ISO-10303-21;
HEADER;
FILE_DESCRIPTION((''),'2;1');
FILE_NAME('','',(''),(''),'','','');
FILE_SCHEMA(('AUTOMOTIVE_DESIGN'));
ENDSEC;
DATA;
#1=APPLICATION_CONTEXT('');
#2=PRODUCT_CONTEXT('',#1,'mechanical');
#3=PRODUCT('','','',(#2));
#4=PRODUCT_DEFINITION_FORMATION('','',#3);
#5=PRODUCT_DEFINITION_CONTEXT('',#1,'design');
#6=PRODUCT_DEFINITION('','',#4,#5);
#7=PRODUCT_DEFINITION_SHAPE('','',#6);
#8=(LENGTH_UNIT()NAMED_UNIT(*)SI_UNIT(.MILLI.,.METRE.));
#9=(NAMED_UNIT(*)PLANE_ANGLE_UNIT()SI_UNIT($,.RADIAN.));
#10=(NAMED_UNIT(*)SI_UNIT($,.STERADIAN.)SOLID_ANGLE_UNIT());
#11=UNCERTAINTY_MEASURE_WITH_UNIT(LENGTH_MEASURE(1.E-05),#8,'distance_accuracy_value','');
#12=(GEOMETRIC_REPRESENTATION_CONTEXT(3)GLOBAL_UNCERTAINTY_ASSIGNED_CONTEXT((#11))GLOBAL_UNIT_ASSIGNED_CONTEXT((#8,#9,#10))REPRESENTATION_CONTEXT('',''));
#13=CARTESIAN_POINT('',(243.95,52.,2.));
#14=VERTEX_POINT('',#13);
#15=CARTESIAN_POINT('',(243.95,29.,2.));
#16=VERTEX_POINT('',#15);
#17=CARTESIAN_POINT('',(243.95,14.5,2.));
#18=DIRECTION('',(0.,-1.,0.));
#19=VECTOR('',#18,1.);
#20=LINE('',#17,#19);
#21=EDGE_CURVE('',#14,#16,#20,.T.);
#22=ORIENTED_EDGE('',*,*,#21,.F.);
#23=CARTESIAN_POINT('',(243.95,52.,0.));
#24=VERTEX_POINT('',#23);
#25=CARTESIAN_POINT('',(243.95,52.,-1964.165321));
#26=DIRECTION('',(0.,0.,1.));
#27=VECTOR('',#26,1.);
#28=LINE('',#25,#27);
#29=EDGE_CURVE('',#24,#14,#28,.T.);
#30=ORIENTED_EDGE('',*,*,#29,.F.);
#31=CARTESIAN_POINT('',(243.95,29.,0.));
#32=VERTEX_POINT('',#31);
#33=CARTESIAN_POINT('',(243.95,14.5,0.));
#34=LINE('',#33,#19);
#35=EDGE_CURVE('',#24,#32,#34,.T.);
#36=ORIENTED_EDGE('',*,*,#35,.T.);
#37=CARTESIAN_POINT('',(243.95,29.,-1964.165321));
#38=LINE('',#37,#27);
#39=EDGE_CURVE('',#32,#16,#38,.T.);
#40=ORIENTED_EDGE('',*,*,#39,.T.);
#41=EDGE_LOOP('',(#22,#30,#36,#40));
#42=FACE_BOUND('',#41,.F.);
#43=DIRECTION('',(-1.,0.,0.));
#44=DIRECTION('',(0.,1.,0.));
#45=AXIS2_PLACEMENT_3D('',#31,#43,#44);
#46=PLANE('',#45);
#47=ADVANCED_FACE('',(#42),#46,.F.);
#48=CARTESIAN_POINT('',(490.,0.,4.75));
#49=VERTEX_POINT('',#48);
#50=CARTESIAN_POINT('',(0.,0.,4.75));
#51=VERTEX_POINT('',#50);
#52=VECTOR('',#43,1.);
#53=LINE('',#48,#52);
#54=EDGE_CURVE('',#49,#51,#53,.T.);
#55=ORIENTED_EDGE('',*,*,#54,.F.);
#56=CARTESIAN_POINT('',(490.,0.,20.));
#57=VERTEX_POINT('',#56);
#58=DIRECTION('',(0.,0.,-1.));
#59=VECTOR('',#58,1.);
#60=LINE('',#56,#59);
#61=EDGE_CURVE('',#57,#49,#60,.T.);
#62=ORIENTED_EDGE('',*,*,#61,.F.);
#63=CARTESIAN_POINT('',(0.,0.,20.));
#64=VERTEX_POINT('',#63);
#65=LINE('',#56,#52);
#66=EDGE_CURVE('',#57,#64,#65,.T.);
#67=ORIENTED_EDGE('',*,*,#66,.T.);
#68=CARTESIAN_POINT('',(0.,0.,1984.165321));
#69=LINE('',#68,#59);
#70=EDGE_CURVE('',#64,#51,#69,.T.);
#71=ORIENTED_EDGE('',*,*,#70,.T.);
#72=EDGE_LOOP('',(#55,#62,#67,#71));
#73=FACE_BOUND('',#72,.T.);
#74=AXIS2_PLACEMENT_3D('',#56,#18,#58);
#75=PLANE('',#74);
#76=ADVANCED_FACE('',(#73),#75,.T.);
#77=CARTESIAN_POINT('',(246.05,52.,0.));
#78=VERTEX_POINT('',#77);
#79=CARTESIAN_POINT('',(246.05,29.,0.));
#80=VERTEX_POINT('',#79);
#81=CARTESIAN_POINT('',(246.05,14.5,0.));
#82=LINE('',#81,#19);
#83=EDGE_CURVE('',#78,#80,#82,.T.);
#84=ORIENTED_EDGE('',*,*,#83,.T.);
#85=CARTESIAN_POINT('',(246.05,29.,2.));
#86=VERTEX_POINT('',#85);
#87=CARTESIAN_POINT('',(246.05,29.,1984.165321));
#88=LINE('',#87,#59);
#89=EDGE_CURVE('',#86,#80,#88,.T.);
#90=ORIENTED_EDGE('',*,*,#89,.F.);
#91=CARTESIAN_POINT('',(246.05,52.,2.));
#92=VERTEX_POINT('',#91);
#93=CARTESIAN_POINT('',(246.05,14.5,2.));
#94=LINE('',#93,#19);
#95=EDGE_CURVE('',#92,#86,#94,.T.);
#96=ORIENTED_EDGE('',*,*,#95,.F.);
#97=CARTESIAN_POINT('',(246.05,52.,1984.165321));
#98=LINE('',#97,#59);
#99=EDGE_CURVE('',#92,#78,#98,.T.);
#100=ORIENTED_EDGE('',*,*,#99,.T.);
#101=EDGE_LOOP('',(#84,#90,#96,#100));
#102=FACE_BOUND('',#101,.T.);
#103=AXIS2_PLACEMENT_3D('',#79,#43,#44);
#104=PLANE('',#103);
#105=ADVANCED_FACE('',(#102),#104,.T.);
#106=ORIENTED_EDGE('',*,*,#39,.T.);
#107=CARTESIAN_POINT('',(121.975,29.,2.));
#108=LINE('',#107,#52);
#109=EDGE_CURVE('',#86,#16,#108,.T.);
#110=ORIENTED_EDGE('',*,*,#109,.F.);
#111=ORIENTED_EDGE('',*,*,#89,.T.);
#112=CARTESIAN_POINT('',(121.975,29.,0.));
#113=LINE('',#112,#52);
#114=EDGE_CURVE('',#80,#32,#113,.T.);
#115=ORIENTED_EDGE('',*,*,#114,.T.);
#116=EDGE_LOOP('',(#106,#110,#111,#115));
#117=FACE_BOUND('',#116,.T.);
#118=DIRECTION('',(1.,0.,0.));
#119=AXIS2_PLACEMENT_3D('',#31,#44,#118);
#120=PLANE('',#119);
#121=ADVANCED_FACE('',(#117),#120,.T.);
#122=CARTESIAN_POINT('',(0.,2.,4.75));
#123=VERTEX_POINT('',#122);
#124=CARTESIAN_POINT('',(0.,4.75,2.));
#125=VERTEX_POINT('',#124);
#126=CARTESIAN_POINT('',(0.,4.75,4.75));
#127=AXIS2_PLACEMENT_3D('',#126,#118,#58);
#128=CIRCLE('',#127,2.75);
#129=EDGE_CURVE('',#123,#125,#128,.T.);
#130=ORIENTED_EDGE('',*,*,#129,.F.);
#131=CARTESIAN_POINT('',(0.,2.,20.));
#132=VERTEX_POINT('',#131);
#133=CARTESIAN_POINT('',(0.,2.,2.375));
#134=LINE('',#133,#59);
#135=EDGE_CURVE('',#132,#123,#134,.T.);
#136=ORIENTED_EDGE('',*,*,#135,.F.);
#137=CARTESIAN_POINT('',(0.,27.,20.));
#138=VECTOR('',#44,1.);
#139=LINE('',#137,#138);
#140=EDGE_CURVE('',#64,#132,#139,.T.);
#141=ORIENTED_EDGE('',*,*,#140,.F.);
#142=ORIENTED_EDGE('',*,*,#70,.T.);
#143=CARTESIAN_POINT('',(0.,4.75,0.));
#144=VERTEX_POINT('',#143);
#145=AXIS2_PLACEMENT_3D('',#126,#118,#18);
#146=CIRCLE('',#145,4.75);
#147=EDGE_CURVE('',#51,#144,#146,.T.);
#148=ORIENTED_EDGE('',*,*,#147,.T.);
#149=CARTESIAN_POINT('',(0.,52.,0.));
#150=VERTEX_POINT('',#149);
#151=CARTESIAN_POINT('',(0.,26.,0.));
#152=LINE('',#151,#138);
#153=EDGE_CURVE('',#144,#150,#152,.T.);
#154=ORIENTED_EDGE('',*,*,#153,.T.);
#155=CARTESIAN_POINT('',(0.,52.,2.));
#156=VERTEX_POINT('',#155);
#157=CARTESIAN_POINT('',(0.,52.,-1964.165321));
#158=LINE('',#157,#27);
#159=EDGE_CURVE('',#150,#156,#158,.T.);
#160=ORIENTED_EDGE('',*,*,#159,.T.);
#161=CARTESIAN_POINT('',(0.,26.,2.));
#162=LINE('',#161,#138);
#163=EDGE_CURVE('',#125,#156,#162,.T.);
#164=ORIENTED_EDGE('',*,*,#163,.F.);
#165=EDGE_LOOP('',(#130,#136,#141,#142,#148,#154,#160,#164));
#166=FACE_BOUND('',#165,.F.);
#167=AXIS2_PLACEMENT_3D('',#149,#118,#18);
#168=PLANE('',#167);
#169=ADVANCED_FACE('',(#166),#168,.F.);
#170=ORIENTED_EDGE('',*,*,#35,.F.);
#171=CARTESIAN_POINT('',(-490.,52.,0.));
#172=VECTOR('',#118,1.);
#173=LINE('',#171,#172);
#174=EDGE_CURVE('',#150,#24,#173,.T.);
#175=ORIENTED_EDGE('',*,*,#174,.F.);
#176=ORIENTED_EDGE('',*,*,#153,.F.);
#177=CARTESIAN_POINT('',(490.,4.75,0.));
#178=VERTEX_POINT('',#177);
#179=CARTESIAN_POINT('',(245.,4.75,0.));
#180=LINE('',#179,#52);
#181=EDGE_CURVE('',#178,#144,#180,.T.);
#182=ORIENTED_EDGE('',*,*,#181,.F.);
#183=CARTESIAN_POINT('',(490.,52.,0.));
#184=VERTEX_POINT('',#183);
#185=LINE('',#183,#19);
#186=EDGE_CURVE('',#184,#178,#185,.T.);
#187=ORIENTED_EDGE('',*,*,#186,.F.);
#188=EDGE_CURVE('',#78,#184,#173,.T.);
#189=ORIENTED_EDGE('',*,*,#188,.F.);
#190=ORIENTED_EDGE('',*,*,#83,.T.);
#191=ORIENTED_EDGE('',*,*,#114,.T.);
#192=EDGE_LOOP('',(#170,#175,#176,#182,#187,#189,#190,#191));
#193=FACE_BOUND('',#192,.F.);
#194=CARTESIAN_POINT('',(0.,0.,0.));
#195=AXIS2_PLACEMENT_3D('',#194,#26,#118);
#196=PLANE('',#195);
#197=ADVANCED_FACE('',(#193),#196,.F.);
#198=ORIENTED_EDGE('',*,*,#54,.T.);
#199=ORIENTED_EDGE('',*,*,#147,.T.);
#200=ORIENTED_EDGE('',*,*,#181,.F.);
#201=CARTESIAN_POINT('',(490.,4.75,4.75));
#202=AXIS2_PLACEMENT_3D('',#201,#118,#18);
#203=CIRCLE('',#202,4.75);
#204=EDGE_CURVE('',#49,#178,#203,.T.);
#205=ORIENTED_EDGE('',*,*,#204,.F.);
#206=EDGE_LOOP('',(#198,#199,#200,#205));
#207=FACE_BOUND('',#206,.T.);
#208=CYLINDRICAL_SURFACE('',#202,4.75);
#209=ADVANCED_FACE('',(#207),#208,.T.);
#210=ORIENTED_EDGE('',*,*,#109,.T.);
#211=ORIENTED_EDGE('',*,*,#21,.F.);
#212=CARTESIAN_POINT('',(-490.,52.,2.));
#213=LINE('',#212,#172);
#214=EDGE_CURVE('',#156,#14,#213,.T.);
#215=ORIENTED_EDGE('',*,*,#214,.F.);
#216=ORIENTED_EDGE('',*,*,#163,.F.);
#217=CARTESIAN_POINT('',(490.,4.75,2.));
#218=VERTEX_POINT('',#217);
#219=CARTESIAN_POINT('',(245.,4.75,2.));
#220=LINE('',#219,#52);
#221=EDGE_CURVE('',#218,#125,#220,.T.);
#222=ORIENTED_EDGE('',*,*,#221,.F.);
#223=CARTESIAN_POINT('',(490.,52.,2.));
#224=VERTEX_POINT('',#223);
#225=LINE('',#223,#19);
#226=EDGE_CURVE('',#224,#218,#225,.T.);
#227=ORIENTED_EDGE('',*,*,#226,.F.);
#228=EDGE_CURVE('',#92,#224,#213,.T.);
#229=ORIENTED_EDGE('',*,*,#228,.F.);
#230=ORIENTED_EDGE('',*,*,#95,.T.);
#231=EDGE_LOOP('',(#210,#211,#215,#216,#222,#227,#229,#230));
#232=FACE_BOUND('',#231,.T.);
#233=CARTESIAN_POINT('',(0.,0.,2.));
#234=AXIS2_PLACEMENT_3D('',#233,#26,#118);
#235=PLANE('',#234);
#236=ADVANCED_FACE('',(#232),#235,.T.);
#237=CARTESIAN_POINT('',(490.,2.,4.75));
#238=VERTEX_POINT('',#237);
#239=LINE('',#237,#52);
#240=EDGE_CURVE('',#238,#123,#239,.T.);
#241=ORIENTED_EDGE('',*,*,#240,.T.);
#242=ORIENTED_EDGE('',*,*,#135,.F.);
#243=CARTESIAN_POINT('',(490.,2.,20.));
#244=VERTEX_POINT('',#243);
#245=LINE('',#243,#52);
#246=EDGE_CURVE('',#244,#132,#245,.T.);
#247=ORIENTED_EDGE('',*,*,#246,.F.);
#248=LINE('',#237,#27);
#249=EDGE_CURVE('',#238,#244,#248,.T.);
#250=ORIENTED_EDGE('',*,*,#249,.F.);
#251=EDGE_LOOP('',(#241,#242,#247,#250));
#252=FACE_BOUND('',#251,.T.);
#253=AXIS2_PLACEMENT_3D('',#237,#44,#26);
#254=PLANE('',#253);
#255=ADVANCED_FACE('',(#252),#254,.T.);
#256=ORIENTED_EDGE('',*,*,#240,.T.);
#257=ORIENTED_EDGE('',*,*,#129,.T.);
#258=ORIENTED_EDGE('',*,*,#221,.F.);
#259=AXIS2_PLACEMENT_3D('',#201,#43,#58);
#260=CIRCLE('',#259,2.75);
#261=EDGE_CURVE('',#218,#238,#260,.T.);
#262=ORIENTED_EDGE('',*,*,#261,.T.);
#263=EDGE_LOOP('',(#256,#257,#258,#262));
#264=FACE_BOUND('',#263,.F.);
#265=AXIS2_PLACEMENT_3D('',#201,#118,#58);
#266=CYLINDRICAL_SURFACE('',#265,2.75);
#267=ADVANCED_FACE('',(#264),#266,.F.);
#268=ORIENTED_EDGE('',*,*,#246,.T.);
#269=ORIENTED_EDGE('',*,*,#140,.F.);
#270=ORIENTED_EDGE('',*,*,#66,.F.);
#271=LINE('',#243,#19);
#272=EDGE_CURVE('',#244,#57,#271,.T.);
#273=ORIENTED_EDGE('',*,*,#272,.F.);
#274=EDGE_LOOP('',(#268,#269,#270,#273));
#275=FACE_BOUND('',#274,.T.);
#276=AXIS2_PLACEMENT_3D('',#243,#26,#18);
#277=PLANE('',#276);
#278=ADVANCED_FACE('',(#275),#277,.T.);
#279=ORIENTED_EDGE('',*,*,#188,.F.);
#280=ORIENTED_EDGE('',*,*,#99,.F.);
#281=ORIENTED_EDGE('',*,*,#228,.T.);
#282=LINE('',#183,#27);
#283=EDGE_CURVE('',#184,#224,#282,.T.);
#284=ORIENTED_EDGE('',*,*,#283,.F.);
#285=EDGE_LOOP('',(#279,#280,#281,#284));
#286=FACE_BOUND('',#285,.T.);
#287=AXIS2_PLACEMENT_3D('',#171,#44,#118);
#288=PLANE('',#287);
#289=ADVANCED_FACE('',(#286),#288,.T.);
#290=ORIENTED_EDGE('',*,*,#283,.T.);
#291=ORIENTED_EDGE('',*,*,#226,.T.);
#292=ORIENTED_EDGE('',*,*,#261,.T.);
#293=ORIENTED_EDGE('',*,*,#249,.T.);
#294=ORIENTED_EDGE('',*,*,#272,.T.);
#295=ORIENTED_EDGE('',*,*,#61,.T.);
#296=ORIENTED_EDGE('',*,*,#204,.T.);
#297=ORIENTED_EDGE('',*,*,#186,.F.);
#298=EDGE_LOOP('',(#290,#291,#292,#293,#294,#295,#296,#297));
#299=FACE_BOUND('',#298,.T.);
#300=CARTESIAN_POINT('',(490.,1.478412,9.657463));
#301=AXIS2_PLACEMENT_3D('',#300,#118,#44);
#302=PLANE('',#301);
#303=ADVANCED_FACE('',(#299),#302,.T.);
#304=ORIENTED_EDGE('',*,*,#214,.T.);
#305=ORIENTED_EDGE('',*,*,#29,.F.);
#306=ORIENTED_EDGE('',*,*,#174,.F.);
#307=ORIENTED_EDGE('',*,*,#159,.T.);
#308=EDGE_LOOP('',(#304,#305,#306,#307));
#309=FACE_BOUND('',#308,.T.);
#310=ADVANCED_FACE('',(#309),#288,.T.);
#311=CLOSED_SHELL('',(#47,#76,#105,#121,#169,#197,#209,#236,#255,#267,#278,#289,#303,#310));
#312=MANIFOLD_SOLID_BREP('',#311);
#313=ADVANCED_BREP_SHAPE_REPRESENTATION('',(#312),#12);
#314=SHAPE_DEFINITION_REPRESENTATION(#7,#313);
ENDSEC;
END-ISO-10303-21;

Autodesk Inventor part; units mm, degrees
ref_plane "YZ Plane" through (0, 0, 0) normal (1, 0, 0) x (0, 1, 0)
ref_plane "XZ Plane" through (0, 0, 0) normal (0, 1, 0) x (-1, 0, 0)
ref_plane "XY Plane" through (0, 0, 0) normal (0, 0, 1) x (1, 0, 0)
sketch "Sketch1" plane through (0, 0, 0) normal (0, 0, 1) x (1, 0, 0)
  line L0 (-490, 52) -> (490, 52)
  line L1 (490, 52) -> (490, 0)
  line L2 (490, 0) -> (-490, 0)
  line L3 (-490, 0) -> (-490, 52)
  point P0 (0, 0)
  point P1 (0, 0)
  dimension "d0" = 980
  dimension "d1" = 52
extrude "Plate1" add sketch "Sketch1" along normal blind 2
sketch "Sketch2" plane through (490, 2, 0) normal (0, -1, 0) x (1, 0, 0)
  line L0 (-980, 0) -> (0, 0)
  line L1 (0, 0) -> (0, 20)
  line L2 (0, 20) -> (-980, 20)
  line L3 (-980, 20) -> (-980, 0)
edge flange "Flange1" height 20 angle 90 thickness 2 bend radius 2.75 thickness toward (0, -1, 0) relief round relief width 2 relief depth 1 edges at (0, 0, 2) wall of the first edge with corners at (-490, 2, 0) (490, 2, 0) (490, 2, 20) (-490, 2, 20)
bend "Bend1"
corner "Corner1"
sketch "Sketch11" plane through (0, 0, 0) normal (0, 0, 1) x (1, 0, 0)
  line L0 (-490, 52) -> (490, 52) projected
  circle A0 centre (0, 52) radius 30
  line L1 (-490, 0) -> (490, 0) projected
  line L2 (246.05, 0) -> (243.95, 0)
  line L3 (243.95, 0) -> (243.95, 29)
  line L4 (243.95, 29) -> (246.05, 29)
  line L5 (246.05, 29) -> (246.05, 0)
  line L6 (-243.95, 0) -> (-246.05, 0)
  line L7 (-246.05, 0) -> (-246.05, 29) construction
  line L8 (-246.05, 29) -> (-243.95, 29) construction
  line L9 (-243.95, 29) -> (-243.95, 0) construction
  line L10 (0, 52) -> (0, 0)
  line L11 (246.05, 29) -> (246.05, 52)
  line L12 (243.95, 29) -> (243.95, 52)
  line L13 (-243.95, 29) -> (-243.95, 52) construction
  line L14 (-246.05, 29) -> (-246.05, 52) construction
  line L15 (-490, 0) -> (-490, 52)
  circle A1 centre (490, 52) radius 30
  line L16 (490, 52) -> (490, 0)
  point P0 (30, 52)
  point P1 (-30, 52)
  point P2 (-245, 29)
  point P3 (245, 29)
  point P4 (490, 22)
  point P5 (460, 52)
  point P6 (0, 22)
  dimension "d44" = 60
  dimension "d47" = 2.1
  dimension "d49" = 490
  dimension "d50" = 29
extrude "Extrusion4" cut sketch "Sketch11" along normal through all both and the other way through all contours L10 A0 L0 | A0 L10 L1 L15 L0 | L0 L11 L4 L12 picked at (-19.7493, 49.7748)
sketch "Sketch9" plane through (0, 0, 2) normal (0, 0, 1) x (1, 0, 0)
  line L0 (456.3279, 23.6801) -> (456.3279, 11.6801) construction
  line L1 (456.3279, 11.6801) -> (256.3279, 11.6801) construction
  line L2 (256.3279, 11.6801) -> (256.3279, 23.6801) construction
  line L3 (256.3279, 23.6801) -> (456.3279, 23.6801) construction
  line L4 (-490, 52) -> (490, 52) projected
  point P0 (0, 0)
  point P1 (1, 52)
  dimension "d38" = 200
  dimension "d39" = 12
mark "Mark3"
equation "\"d1\" = СПИНА_Стрингер_1_высота"
equation "\"d2\" = Thickness"
equation "\"d3\" = BendReliefWidth"
equation "\"d4\" = BendReliefDepth"
equation "\"d5\" = MinimumRemnant"
equation "\"d6\" = TransitionRadius"
equation "\"d9\" = BendRadius"
equation "\"d10\" = CornerReliefSize"
equation "\"d11\" = GapSize"
equation "\"d12\" = JacobiRadiusSize"
equation "\"BendReliefWidth\" = Thickness"
equation "\"BendReliefDepth\" = 0.5 * Thickness"
equation "\"CornerReliefSize\" = 4 * Thickness"
equation "\"MinimumRemnant\" = 2 * Thickness"
equation "\"TransitionRadius\" = BendRadius"
equation "\"JacobiRadiusSize\" = BendRadius"
equation "\"GapSize\" = Thickness"
equation "\"СПИНА_Стрингер_1_высота\" = 52"
equation "\"Thickness\" = 2"
equation "\"BendRadius\" = 2.75"
properties part number "MSC 204 stringer back ^" material "Stainless Steel"
